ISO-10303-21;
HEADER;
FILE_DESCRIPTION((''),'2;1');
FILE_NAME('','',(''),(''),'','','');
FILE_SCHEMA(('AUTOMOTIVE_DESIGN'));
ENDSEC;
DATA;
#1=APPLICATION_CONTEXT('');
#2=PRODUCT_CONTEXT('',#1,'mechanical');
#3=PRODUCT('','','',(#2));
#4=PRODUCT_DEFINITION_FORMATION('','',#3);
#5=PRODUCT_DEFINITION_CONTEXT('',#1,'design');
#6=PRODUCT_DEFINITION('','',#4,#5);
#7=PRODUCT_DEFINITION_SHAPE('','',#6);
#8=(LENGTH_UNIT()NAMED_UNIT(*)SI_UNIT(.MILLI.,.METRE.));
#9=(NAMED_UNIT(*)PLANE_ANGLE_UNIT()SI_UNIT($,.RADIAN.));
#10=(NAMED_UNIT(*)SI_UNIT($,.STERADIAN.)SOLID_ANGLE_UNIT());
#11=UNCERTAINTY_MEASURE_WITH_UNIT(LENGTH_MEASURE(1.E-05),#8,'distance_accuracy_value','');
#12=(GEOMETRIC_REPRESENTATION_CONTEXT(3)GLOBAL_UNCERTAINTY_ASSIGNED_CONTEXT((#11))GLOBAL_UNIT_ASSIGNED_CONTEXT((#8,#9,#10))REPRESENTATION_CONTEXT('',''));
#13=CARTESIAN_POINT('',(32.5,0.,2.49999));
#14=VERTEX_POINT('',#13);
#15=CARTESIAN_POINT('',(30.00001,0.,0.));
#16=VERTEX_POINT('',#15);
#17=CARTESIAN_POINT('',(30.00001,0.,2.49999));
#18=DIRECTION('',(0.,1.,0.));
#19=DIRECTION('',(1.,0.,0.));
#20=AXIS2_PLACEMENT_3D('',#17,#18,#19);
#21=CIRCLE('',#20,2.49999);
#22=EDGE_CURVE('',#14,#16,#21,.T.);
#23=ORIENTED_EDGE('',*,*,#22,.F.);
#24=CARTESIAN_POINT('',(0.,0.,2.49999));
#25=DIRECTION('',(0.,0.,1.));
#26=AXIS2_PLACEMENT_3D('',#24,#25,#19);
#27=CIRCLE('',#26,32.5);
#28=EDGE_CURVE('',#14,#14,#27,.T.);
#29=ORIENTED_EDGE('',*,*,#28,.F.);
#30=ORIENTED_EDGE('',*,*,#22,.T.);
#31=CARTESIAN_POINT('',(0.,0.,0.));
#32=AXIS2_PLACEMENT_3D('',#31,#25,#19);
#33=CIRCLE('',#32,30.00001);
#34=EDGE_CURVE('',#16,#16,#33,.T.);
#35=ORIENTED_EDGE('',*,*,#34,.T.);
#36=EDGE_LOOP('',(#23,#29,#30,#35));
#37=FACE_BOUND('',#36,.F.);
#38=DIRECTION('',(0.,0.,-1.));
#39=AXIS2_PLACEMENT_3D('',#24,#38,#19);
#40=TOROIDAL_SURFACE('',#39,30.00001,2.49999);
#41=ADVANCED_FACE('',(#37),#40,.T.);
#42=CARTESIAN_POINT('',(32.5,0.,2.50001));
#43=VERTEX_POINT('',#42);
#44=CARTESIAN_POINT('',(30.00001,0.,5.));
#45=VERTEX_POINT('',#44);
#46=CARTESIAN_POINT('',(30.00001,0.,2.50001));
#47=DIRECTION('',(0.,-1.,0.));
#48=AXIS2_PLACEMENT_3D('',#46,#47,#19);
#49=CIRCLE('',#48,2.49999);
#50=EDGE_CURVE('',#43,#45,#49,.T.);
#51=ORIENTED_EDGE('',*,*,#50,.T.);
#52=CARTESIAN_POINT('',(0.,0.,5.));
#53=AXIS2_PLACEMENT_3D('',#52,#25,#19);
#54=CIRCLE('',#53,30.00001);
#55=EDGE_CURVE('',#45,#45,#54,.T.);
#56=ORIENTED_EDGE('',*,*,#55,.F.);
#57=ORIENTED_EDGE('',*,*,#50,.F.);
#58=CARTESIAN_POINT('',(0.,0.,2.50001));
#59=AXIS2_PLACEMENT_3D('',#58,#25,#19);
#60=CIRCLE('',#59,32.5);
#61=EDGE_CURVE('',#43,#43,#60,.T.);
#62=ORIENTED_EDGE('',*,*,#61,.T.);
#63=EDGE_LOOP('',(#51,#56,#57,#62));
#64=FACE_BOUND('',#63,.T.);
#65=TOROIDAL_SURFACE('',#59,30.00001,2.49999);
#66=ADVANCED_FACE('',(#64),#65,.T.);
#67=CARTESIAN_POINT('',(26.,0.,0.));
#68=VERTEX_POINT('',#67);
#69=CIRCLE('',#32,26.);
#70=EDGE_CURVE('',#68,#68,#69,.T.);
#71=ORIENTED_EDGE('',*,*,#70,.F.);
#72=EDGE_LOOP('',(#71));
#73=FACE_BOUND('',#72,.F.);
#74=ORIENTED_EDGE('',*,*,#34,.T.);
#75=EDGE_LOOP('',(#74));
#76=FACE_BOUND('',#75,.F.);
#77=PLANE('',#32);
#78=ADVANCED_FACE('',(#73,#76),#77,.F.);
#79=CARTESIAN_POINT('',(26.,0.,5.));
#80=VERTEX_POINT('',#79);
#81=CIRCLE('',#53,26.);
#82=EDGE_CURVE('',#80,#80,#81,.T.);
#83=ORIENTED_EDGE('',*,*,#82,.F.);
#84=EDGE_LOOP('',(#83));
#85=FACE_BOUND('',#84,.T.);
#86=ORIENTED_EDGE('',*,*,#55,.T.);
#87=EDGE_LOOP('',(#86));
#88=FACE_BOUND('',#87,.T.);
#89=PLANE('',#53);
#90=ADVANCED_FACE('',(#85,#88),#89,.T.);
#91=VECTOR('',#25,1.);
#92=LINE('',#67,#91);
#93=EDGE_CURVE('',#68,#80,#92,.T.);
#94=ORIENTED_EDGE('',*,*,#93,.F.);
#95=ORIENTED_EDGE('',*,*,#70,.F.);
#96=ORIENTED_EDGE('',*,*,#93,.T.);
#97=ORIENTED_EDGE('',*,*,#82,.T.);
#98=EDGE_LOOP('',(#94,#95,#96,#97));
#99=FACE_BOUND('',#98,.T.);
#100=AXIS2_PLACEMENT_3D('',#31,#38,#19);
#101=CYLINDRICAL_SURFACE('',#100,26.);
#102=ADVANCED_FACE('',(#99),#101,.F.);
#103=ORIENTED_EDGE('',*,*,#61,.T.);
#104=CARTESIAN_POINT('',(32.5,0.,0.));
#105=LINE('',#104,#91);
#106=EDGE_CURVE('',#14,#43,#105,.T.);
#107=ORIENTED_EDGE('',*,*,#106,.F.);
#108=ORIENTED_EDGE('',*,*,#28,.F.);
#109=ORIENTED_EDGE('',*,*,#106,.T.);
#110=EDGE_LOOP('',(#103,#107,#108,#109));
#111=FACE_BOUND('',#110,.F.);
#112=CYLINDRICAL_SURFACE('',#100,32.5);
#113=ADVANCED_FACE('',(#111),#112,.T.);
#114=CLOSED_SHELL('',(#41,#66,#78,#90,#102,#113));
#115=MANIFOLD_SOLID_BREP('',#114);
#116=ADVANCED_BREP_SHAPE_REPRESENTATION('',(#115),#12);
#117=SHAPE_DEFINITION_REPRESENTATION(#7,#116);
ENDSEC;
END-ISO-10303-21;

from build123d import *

# Parameters (mm, degrees)
F0_R     = 32.5
F0_R_2   = 26
F1_DEPTH = 5
F2_R     = 2.49999


# Not quite as in the source:
# - a fillet or chamfer is up to 0.001 mm smaller than in the source, because OpenCascade refuses the exact size


with BuildPart() as f1:
    # F0 (on Top) → F1 (new body)
    with BuildSketch(Plane.XY):
        Circle(F0_R)
        Circle(F0_R_2, mode=Mode.SUBTRACT)
    extrude(amount=F1_DEPTH)

    # F2 (radius 2.5 in the source; OpenCascade refuses exactly that, so slightly less here)
    f2_edges = [f1.edges().sort_by_distance(p)[0] for p in [
        (32.5, 0, 2.5),
        (-32.5, 0, 0),
        (-32.5, 0, 5),
    ]]
    fillet(f2_edges, radius=F2_R)


solid = f1.part
